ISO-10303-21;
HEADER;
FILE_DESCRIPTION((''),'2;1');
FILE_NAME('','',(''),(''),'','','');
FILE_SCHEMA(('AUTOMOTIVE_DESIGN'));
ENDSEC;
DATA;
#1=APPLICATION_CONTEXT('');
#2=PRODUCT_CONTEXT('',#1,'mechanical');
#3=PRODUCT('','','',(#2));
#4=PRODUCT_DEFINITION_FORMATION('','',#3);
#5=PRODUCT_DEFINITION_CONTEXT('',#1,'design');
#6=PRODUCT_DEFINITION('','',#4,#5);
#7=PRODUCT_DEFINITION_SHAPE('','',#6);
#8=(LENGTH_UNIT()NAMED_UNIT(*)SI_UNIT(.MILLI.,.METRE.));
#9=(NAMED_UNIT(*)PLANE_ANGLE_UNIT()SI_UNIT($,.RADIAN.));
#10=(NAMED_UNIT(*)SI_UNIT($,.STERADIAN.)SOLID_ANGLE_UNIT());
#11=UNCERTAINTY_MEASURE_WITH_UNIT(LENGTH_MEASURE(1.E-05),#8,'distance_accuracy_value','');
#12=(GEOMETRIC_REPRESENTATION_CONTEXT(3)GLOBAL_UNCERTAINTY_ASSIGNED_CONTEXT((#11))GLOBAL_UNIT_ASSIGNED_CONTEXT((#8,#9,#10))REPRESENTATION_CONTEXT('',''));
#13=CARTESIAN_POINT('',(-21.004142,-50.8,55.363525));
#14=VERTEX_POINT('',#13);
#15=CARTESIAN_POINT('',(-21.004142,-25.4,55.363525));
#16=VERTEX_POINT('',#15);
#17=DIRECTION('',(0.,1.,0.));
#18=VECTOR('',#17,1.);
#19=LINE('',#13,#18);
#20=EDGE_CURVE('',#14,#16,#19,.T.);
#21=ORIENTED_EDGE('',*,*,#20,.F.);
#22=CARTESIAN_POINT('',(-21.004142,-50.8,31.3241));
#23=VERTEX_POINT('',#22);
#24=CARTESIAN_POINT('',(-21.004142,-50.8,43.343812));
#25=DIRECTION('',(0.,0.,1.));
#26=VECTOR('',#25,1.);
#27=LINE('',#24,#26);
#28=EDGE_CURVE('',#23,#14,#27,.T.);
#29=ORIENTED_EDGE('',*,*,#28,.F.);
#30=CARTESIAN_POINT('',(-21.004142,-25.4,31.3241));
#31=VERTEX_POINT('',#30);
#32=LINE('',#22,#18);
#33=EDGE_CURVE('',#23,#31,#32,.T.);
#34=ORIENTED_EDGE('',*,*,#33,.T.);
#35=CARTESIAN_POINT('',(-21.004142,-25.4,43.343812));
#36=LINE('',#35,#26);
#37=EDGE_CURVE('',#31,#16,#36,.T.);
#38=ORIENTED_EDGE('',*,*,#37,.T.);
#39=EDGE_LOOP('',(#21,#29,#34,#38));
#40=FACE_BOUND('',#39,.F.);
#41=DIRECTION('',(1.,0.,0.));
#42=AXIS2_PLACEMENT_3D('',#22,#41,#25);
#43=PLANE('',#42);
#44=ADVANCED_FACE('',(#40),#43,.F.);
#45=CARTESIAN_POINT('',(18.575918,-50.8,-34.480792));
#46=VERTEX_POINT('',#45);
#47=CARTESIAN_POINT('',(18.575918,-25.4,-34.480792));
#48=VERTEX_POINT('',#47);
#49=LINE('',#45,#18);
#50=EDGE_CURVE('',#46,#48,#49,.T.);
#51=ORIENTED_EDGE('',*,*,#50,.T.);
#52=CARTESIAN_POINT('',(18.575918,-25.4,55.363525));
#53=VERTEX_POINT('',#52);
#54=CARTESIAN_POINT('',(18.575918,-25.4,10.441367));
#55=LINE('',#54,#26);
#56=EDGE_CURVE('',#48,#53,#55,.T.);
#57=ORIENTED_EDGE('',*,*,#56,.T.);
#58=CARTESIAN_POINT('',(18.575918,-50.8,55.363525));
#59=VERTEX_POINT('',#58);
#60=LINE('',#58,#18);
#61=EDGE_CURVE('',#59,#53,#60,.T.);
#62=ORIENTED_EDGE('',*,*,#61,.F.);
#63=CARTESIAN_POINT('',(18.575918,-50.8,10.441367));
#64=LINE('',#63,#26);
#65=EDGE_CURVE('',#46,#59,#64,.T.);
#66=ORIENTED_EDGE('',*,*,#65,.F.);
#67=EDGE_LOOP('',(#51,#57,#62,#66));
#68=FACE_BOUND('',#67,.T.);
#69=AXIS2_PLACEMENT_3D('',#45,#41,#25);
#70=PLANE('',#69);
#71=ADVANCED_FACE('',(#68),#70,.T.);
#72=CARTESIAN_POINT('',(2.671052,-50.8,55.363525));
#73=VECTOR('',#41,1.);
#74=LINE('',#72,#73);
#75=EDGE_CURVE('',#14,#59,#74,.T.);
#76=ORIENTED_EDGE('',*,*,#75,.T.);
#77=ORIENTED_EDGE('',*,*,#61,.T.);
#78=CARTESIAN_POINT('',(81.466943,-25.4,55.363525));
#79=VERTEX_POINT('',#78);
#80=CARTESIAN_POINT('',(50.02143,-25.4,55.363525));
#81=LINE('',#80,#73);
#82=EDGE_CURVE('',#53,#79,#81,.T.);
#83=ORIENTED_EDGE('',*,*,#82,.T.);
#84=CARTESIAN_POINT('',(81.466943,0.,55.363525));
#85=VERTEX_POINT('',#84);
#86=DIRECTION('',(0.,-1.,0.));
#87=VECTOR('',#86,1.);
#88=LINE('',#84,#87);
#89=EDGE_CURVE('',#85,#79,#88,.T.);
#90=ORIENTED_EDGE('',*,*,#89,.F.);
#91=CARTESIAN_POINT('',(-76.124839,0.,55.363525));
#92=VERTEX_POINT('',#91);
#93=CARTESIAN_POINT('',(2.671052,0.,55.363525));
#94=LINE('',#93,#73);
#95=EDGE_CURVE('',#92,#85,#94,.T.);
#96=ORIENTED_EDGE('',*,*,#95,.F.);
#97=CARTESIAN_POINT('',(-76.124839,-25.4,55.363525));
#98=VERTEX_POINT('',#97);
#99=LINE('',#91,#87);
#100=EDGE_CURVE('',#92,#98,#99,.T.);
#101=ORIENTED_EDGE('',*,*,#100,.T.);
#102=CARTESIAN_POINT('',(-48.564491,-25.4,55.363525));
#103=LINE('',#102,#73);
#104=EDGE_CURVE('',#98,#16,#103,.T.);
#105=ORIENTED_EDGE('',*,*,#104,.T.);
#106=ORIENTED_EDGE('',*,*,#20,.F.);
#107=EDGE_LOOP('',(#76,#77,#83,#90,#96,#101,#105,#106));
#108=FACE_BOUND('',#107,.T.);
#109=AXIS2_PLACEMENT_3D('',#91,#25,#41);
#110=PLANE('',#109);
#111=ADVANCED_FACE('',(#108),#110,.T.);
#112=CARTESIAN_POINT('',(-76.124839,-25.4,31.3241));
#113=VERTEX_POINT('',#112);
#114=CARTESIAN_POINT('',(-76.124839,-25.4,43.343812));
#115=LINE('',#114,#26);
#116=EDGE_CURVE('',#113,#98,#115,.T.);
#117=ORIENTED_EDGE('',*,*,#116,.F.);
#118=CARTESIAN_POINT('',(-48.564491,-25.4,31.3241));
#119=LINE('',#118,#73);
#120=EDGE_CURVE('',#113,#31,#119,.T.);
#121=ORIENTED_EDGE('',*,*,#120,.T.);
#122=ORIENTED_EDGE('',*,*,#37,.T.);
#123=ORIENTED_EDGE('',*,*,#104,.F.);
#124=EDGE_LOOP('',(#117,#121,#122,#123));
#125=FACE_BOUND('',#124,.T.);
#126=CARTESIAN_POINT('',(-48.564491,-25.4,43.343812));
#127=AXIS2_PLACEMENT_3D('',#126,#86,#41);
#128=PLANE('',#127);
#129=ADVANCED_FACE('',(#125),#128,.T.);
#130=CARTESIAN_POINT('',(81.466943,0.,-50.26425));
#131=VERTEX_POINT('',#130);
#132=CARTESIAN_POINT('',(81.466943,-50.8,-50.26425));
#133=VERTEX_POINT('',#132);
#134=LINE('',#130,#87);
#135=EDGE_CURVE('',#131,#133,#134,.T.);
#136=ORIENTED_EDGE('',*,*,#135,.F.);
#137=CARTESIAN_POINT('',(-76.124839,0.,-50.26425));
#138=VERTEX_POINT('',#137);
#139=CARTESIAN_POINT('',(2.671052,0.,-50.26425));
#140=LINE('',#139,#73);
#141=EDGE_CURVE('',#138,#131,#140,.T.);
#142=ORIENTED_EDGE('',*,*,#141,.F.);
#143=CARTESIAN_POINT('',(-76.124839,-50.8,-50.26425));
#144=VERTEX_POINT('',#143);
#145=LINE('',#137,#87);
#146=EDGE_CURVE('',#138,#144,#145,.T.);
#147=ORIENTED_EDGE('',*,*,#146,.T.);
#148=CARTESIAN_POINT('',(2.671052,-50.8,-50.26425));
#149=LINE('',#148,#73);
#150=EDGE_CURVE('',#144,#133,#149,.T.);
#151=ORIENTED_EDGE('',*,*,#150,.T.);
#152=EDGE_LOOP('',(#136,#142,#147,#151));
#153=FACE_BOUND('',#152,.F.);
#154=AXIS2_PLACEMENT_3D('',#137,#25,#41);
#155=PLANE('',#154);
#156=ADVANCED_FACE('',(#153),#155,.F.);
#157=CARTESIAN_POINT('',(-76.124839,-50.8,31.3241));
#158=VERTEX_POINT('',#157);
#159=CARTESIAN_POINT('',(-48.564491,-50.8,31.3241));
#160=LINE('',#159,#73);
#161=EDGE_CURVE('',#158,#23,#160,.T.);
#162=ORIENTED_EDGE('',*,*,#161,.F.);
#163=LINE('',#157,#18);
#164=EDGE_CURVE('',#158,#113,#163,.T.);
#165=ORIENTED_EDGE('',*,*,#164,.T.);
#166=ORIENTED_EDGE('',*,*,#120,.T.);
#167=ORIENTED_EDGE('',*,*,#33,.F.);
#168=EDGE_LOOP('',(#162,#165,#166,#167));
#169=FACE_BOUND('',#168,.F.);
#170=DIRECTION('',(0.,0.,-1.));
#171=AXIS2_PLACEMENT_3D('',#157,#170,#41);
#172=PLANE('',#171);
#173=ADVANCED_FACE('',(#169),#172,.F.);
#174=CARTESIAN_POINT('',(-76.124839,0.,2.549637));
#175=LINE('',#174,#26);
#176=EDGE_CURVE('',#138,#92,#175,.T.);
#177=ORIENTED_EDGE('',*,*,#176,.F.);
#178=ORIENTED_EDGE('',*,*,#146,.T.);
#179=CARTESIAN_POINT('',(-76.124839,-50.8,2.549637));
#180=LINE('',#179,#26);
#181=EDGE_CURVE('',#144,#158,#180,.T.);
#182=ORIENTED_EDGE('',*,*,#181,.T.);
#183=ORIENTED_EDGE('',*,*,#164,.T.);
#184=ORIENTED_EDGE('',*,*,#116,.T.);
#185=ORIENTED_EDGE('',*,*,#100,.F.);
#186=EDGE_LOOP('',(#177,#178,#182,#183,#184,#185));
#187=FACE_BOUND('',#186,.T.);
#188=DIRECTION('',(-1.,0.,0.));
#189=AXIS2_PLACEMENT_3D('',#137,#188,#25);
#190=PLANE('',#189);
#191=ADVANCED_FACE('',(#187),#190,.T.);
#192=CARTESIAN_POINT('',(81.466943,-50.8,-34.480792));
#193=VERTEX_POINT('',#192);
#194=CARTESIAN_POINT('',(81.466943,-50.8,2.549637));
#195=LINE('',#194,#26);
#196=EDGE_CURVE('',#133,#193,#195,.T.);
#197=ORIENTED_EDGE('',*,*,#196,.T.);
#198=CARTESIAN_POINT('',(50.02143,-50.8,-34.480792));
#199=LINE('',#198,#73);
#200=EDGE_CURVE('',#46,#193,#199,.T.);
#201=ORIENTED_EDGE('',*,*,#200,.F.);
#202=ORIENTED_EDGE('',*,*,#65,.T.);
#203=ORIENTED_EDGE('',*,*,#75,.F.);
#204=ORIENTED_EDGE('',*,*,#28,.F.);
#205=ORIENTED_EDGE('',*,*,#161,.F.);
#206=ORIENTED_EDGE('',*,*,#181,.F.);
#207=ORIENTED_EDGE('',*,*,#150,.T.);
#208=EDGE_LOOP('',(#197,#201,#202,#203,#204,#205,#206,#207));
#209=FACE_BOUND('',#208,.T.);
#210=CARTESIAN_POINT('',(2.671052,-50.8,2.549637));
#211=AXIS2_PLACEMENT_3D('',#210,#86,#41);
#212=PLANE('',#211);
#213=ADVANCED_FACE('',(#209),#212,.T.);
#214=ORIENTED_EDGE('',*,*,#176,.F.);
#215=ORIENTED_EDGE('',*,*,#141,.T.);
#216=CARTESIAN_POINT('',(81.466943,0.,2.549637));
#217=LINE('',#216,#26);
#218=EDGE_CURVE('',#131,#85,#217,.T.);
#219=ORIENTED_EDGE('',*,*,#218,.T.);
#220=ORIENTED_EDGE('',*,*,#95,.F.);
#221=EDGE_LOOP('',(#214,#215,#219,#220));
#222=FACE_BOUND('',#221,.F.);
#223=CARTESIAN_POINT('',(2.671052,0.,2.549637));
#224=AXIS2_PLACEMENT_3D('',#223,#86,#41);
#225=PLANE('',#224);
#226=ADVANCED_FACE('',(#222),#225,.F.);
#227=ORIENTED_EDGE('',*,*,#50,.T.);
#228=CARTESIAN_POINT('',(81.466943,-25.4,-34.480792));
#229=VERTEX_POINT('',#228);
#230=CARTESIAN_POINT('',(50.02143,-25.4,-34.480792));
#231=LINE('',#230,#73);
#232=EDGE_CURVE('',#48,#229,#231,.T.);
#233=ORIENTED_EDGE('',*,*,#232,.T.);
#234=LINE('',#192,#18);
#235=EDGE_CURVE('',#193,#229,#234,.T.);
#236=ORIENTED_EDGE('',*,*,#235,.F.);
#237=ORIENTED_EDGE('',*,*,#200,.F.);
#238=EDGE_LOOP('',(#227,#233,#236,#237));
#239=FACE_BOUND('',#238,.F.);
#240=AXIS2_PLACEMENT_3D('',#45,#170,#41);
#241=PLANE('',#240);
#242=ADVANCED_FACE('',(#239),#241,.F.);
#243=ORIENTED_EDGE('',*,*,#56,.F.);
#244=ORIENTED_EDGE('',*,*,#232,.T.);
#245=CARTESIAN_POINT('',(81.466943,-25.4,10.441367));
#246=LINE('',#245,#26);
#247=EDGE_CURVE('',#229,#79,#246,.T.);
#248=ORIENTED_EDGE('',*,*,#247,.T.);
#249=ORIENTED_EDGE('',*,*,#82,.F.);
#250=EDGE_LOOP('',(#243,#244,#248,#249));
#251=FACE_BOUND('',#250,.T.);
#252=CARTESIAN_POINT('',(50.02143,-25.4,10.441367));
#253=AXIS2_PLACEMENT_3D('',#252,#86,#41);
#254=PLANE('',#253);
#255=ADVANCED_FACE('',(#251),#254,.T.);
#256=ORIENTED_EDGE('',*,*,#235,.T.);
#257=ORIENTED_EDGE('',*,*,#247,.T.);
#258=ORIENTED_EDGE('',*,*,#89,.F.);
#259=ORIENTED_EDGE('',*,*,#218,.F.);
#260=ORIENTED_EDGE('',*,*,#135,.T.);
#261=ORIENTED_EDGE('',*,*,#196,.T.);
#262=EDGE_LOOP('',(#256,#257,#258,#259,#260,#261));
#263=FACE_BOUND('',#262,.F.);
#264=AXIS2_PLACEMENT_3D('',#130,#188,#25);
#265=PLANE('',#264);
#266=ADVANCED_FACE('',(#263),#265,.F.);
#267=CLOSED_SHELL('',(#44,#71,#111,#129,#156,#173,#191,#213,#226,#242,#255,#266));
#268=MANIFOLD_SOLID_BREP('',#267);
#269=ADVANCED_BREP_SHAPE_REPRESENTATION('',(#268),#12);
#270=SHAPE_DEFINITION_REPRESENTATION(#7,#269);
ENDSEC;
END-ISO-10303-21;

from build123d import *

# Parameters (mm, degrees)
F0_W     = 157.5917825103
F0_H     = 105.6277751923
F1_DEPTH = 50.8
F2_W     = 55.120697245
F2_H     = 24.0394249558
F3_DEPTH = 25.4
F2_W_2   = 62.8910250962
F2_H_2   = 89.8443162441
F4_DEPTH = 25.4


with BuildPart() as f1:
    # F0 (on Front) → F1 (new body)
    with BuildSketch(Plane.XZ):
        with Locations((2.6710517704, 2.549637109)):
            Rectangle(F0_W, F0_H)
    extrude(amount=F1_DEPTH)

    # F2 (on face) → F3 (cut)
    with BuildSketch(Plane.XZ.offset(50.8)):
        with Locations((-48.5644908622, 43.3438122272)):
            Rectangle(F2_W, F2_H)
    extrude(amount=-F3_DEPTH, mode=Mode.SUBTRACT)

    # F2 (on face) → F4 (cut)
    with BuildSketch(Plane.XZ.offset(50.8)):
        with Locations((50.0214304775, 10.4413665831)):
            Rectangle(F2_W_2, F2_H_2)
    extrude(amount=-F4_DEPTH, mode=Mode.SUBTRACT)


solid = f1.part
